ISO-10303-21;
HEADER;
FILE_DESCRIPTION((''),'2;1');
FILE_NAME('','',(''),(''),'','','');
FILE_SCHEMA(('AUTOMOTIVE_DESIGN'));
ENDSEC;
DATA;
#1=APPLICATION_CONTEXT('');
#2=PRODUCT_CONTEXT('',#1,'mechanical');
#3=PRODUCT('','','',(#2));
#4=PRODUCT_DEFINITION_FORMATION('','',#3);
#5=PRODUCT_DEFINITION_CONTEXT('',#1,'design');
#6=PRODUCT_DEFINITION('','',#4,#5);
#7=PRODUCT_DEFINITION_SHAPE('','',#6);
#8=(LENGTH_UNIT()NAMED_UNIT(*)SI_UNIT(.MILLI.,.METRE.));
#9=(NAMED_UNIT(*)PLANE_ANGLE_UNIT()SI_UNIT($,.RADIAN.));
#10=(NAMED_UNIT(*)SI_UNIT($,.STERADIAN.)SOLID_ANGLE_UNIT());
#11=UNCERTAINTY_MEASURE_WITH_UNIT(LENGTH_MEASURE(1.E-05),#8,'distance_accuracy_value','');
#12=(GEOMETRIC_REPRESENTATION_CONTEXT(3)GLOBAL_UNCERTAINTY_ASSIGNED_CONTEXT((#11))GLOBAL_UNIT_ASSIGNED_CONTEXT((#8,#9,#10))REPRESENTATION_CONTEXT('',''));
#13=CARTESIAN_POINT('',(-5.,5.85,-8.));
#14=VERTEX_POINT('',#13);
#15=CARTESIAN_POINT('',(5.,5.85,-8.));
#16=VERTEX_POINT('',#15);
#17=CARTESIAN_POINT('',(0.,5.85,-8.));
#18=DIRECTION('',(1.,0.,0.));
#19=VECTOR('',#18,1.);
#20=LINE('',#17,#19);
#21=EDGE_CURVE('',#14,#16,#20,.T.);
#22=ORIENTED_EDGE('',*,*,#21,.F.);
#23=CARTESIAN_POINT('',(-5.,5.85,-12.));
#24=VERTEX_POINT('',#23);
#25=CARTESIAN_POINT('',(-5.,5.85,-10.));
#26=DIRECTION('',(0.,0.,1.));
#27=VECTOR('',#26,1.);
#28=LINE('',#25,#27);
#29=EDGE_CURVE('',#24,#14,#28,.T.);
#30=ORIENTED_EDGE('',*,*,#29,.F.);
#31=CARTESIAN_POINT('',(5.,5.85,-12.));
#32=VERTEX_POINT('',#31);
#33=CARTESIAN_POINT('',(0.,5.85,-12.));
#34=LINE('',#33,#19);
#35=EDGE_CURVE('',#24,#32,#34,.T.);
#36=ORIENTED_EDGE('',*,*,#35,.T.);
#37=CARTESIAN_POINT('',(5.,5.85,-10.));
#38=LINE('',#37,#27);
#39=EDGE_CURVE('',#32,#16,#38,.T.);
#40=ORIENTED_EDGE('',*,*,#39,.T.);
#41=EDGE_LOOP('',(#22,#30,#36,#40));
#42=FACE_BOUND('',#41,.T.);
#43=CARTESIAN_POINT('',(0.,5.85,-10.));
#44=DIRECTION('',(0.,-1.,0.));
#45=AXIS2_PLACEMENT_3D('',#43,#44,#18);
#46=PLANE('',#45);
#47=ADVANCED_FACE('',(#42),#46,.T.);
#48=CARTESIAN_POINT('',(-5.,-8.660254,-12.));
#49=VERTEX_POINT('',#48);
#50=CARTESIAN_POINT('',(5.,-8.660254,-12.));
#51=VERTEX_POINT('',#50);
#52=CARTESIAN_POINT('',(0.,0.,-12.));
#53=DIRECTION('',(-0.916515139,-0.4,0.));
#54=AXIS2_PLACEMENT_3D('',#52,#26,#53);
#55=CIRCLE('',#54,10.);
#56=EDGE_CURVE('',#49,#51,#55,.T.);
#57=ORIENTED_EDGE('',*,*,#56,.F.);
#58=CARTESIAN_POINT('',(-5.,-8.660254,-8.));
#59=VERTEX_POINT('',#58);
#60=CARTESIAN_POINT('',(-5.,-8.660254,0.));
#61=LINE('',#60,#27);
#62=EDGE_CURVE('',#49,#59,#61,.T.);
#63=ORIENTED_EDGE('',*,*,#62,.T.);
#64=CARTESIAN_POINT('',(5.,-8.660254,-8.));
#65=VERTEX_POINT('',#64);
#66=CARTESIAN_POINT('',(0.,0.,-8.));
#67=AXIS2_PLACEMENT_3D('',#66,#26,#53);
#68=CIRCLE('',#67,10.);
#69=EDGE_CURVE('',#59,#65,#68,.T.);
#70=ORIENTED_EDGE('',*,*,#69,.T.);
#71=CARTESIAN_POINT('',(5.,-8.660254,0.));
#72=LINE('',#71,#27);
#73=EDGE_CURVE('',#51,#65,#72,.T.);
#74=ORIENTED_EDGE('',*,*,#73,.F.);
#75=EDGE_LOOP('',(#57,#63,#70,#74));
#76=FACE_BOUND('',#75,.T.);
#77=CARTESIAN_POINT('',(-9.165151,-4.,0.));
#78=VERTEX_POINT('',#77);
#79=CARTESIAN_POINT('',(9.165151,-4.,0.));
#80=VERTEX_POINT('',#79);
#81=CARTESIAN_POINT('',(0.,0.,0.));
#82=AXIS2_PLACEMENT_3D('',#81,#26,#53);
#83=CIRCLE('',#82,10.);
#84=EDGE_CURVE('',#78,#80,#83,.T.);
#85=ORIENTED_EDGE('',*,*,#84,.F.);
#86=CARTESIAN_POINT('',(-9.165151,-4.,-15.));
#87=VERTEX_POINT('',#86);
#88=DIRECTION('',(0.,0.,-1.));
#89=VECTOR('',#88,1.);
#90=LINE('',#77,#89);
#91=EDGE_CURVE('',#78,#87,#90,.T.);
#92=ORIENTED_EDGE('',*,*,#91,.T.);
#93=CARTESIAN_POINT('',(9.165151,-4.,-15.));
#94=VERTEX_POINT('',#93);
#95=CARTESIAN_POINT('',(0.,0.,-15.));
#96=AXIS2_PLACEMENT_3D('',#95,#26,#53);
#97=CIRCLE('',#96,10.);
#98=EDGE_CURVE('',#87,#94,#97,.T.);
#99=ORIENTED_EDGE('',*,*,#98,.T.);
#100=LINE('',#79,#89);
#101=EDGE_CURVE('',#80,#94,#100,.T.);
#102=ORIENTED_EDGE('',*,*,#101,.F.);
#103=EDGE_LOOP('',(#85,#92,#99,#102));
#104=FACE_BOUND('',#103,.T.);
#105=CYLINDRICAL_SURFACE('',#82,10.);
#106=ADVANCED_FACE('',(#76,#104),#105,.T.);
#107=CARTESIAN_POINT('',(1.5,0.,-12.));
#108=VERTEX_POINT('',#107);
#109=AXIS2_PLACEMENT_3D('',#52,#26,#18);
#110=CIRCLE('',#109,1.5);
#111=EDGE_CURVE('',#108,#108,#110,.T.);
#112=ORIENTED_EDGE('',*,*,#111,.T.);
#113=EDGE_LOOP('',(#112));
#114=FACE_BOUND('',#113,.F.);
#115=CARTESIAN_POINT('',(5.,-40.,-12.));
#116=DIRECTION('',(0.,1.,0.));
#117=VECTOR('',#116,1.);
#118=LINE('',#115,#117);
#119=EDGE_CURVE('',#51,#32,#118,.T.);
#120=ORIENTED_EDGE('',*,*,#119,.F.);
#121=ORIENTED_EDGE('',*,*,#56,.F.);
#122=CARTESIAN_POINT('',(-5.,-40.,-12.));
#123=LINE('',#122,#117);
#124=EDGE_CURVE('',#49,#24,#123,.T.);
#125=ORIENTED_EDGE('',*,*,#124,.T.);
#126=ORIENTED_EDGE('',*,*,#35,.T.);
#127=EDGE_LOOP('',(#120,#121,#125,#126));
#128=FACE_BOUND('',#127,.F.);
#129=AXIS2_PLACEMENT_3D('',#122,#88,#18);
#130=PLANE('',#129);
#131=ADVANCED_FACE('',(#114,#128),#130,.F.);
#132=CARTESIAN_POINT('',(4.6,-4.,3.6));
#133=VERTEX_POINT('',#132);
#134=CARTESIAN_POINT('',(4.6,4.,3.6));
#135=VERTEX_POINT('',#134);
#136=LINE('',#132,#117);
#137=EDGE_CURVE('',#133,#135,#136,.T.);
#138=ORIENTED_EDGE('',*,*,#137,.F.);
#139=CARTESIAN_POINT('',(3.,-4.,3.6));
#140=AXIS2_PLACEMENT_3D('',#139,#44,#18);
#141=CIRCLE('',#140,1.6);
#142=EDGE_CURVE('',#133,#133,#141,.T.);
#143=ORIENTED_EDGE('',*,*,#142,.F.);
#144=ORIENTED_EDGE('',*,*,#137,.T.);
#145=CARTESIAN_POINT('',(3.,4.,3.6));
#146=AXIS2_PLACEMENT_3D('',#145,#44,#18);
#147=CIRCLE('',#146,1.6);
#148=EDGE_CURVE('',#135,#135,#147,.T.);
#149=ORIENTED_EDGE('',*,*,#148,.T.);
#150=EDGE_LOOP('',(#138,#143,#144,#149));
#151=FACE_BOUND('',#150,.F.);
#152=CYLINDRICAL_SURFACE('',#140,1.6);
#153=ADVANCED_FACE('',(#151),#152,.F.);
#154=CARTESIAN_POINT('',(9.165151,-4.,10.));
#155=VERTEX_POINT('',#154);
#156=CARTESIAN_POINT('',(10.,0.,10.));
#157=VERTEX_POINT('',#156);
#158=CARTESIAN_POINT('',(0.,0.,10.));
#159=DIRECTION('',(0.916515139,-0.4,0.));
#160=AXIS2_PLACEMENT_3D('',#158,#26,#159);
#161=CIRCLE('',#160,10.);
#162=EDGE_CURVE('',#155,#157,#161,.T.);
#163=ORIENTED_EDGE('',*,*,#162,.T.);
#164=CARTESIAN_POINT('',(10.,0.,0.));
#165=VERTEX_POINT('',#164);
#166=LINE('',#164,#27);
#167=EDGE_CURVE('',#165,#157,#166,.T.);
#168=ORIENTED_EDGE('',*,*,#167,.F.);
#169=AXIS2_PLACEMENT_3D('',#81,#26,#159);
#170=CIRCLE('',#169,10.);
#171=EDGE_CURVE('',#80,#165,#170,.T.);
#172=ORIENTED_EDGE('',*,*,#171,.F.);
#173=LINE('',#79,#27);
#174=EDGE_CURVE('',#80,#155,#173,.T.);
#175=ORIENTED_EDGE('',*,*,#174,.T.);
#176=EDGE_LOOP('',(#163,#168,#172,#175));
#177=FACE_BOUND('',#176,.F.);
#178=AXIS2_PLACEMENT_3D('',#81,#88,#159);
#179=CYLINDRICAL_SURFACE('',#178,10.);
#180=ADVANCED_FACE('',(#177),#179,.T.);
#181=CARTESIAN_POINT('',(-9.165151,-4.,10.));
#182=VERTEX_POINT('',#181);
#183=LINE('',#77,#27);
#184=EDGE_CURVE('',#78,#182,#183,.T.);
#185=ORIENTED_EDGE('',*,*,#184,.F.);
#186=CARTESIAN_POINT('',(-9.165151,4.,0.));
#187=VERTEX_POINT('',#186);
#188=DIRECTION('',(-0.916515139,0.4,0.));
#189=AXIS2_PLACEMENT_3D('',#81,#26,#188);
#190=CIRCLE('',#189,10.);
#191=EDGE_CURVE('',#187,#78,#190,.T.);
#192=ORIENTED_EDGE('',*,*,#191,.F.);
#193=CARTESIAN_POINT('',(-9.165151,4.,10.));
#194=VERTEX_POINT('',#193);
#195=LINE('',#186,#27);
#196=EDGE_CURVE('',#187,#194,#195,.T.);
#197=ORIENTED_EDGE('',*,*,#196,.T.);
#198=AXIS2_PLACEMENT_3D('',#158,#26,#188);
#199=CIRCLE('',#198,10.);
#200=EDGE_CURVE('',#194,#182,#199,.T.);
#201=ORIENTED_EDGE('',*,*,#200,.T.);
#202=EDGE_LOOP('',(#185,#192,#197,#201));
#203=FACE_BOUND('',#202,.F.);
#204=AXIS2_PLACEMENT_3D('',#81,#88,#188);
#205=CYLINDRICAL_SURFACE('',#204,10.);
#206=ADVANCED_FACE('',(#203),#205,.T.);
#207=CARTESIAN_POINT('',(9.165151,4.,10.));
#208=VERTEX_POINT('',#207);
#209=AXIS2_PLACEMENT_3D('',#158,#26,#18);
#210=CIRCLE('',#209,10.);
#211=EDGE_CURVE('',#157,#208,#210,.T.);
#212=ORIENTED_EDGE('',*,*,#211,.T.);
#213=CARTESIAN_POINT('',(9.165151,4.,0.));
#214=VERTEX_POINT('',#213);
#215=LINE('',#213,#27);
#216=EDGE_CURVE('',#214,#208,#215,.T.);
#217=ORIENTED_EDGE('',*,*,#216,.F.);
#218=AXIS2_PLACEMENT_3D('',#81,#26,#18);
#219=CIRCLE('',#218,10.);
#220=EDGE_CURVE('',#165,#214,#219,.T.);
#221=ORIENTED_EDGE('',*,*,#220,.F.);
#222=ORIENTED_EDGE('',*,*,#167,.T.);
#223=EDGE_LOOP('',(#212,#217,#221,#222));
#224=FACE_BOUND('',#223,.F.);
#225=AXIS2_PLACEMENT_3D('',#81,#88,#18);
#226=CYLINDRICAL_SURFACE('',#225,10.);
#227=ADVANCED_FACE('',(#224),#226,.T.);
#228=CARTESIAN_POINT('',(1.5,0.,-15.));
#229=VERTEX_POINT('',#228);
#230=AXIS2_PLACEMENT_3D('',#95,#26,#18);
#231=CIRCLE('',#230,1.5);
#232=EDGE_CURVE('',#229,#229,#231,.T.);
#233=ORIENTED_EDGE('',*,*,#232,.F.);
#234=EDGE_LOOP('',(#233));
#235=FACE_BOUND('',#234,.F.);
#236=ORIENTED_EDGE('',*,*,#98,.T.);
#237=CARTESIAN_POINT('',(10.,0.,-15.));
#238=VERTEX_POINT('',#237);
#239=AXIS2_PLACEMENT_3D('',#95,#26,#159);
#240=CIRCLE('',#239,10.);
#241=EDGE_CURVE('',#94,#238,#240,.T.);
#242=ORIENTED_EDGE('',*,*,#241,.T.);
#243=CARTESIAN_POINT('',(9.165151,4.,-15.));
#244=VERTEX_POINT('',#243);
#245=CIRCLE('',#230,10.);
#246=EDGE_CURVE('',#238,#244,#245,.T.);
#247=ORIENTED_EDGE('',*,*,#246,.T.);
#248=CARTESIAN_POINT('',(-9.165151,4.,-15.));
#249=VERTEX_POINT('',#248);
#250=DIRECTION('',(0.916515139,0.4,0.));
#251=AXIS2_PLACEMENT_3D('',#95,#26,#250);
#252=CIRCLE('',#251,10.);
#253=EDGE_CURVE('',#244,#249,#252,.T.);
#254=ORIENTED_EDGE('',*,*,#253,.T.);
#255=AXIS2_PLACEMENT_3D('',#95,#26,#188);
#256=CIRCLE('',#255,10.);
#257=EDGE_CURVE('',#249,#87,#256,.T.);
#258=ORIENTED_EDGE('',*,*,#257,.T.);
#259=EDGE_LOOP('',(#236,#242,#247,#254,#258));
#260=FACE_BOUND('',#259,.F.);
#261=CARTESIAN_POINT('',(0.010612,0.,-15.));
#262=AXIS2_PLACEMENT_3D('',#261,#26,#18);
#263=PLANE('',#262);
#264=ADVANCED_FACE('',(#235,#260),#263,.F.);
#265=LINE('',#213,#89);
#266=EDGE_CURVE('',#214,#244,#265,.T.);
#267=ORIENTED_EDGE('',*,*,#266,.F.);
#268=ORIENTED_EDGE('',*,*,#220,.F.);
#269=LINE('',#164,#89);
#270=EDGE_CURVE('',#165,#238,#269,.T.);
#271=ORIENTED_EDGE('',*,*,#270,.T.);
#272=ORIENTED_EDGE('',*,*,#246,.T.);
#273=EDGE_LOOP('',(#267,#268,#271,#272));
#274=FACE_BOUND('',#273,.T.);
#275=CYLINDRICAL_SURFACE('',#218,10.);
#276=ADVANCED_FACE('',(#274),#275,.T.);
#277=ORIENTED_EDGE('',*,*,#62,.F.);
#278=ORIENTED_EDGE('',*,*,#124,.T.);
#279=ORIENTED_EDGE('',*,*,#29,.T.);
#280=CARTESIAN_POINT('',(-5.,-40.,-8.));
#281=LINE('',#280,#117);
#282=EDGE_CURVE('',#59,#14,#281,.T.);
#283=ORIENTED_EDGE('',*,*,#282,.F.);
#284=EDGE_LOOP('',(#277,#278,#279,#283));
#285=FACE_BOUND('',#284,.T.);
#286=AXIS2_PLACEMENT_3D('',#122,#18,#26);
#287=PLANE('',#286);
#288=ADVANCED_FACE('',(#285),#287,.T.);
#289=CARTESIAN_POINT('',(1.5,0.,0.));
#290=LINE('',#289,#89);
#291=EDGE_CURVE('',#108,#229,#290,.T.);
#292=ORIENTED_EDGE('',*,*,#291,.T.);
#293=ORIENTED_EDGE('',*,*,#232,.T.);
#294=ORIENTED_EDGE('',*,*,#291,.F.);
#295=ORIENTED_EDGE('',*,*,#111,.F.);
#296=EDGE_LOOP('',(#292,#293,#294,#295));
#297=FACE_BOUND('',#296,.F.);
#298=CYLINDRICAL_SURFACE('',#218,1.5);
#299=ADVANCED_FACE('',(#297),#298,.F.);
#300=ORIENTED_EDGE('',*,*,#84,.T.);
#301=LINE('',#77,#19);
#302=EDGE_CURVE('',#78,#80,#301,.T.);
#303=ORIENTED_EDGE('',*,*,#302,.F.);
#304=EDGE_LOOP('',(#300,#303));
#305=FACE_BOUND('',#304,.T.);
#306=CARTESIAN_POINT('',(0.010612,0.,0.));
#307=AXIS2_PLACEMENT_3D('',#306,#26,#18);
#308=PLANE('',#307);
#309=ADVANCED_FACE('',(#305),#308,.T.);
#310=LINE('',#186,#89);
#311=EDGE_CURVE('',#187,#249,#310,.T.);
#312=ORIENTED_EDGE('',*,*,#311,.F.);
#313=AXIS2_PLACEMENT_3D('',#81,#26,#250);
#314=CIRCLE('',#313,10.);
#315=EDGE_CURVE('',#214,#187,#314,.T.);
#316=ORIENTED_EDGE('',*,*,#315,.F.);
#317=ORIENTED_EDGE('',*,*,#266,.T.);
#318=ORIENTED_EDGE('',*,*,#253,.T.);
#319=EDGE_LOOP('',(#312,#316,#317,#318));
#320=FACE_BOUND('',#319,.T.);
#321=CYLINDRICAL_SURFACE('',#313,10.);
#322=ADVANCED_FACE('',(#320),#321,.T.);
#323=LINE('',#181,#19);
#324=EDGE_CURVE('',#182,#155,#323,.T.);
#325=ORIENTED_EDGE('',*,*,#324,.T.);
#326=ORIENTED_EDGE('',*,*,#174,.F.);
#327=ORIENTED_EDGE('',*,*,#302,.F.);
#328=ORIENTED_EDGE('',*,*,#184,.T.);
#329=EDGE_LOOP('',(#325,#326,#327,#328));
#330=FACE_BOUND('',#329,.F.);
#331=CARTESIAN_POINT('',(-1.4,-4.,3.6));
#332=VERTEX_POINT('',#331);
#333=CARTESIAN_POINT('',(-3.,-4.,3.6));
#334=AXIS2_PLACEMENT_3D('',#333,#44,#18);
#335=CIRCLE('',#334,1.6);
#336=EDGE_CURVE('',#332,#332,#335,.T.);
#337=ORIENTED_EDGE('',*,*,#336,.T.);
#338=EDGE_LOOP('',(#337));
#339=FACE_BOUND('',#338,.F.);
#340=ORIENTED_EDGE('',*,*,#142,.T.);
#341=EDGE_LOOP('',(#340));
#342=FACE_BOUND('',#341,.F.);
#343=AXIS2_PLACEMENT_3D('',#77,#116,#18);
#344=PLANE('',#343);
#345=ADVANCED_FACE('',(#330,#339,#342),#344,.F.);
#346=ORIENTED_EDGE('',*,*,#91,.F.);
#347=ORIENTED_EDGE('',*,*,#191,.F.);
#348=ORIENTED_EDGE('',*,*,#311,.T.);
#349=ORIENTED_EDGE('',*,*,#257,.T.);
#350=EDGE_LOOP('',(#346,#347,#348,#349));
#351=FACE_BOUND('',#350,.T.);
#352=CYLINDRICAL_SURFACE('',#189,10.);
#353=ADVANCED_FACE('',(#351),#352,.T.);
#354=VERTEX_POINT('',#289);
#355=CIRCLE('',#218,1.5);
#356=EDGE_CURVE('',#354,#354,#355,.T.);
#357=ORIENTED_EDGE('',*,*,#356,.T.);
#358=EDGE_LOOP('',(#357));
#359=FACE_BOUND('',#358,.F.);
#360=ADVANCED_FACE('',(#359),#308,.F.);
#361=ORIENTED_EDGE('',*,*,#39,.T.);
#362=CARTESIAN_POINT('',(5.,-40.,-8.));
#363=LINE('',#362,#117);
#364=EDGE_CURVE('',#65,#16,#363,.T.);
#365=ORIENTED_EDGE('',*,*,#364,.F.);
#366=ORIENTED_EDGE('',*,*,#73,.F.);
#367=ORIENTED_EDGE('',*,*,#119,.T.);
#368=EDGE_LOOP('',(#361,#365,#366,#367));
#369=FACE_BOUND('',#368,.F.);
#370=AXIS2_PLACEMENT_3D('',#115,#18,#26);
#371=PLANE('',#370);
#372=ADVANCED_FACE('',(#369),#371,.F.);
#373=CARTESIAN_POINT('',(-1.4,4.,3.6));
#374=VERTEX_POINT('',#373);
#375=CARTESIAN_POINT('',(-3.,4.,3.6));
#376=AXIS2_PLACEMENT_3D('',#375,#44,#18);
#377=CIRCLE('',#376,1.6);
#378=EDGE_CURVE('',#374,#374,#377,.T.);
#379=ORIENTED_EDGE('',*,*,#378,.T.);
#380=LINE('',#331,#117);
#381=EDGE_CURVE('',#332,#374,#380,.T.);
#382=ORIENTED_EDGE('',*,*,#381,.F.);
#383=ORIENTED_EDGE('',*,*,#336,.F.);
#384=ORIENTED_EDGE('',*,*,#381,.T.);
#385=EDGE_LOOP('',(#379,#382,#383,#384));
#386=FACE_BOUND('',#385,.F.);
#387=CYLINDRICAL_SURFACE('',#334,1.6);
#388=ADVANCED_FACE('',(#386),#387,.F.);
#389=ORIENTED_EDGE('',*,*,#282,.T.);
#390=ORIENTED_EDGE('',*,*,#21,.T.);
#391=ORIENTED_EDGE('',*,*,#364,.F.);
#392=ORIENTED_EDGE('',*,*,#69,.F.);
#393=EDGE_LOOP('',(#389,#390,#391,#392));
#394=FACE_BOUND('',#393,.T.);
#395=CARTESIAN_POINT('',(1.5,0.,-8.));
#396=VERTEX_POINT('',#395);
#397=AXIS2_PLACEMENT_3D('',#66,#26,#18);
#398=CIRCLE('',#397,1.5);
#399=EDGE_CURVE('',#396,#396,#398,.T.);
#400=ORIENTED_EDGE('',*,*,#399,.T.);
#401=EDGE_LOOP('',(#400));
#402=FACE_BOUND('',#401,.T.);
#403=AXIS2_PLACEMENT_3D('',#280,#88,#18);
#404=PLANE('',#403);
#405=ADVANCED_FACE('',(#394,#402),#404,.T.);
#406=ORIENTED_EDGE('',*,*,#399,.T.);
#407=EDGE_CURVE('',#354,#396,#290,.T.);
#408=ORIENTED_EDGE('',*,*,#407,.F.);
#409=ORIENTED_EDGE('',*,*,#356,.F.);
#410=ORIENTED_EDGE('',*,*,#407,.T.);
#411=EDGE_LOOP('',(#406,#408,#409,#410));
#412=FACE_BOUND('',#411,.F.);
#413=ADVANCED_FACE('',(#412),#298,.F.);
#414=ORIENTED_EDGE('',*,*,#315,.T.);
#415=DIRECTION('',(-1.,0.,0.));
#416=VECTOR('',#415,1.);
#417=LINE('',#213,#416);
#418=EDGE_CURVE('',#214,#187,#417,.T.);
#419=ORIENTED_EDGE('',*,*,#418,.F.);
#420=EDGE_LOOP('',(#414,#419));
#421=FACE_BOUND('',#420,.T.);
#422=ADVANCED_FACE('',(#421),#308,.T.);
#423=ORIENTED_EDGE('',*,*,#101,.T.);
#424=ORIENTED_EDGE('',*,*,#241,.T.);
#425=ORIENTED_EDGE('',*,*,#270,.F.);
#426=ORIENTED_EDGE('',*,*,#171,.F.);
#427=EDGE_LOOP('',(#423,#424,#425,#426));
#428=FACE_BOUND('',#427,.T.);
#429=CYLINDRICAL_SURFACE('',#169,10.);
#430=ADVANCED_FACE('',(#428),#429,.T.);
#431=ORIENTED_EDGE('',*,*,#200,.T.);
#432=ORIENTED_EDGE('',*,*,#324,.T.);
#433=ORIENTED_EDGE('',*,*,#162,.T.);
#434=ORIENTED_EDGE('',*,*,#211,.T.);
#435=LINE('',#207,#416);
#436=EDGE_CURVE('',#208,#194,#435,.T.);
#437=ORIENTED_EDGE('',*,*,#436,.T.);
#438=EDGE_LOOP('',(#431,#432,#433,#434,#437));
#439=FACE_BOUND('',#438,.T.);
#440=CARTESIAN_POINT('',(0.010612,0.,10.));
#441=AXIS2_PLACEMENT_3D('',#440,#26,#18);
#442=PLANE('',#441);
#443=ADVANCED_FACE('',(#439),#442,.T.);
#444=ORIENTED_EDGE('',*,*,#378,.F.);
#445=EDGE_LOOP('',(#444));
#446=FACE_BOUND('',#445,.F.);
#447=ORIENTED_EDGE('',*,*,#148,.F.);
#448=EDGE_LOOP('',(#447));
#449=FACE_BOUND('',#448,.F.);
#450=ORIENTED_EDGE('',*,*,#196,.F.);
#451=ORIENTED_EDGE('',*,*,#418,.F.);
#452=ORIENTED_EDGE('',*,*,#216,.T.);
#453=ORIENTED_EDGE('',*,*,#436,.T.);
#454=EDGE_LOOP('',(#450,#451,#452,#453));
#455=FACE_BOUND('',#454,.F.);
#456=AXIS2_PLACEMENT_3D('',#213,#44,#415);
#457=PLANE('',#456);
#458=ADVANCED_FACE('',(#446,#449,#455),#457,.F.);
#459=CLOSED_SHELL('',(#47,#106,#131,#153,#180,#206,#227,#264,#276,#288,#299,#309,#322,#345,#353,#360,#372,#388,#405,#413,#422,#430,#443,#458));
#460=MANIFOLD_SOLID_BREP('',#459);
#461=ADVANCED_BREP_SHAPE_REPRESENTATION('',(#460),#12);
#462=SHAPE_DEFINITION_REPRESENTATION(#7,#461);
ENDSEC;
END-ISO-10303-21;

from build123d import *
from build123d import SkipClean  # not in build123d's __all__

# Parameters (mm, degrees)
F0_R     = 1.5
F1_DEPTH = 15
F3_W     = 10
F3_H     = 4
F5_DEPTH = 45.85
F6_DEPTH = 10
F7_R     = 1.6
F8_DEPTH = 14.001


# Not quite as in the source:
# - after a boolean that leaves OpenCascade's solid faulty, fix() repairs it


with BuildPart() as f1:
    # F0 (on Top) → F1 (new body)
    with BuildSketch(Plane.XY):
        with BuildLine():
            ThreePointArc((9.1651513899, -4), (9.7890631293, -2.0430964369), (10, 0))
            ThreePointArc((10, 0), (9.7890631293, 2.0430964369), (9.1651513899, 4))
            Line((9.1651513899, 4), (-9.1651513899, 4))
            ThreePointArc((-9.1651513899, 4), (-10, 0), (-9.1651513899, -4))
            Line((-9.1651513899, -4), (9.1651513899, -4))
        make_face()
        Circle(F0_R, mode=Mode.SUBTRACT)
        with BuildLine():
            ThreePointArc((-9.1651513899, -4), (0, -10), (9.1651513899, -4))
            Line((9.1651513899, -4), (-9.1651513899, -4))
        make_face()
        with BuildLine():
            Line((-9.1651513899, 4), (9.1651513899, 4))
            ThreePointArc((9.1651513899, 4), (0, 10), (-9.1651513899, 4))
        make_face()
    extrude(amount=-F1_DEPTH)

    # F3 (on offset) → F5 (cut, through all)
    with BuildSketch(Plane.XZ.offset(40)):
        with Locations((0, -10)):
            Rectangle(F3_W, F3_H)
    extrude(amount=-F5_DEPTH, mode=Mode.SUBTRACT)

    # F0 (on Top) → F6 (join)
    with BuildSketch(Plane.XY):
        with BuildLine():
            ThreePointArc((9.1651513899, -4), (9.7890631293, -2.0430964369), (10, 0))
            ThreePointArc((10, 0), (9.7890631293, 2.0430964369), (9.1651513899, 4))
            Line((9.1651513899, 4), (-9.1651513899, 4))
            ThreePointArc((-9.1651513899, 4), (-10, 0), (-9.1651513899, -4))
            Line((-9.1651513899, -4), (9.1651513899, -4))
        make_face()
        Circle(F0_R, mode=Mode.SUBTRACT)
        Circle(F0_R)
    with SkipClean():  # cleaning this boolean's faces spoils the solid; the shape is the same uncleaned
        extrude(amount=F6_DEPTH)

    # F7 (on face) → F8 (cut, through all)
    with BuildSketch(Plane.XZ.offset(4)):
        with Locations((-3, 3.6)):
            Circle(F7_R)
        with Locations((3, 3.6)):
            Circle(F7_R)
    extrude(amount=-F8_DEPTH, mode=Mode.SUBTRACT)

    add(f1.part.fix(), mode=Mode.REPLACE)


solid = f1.part
